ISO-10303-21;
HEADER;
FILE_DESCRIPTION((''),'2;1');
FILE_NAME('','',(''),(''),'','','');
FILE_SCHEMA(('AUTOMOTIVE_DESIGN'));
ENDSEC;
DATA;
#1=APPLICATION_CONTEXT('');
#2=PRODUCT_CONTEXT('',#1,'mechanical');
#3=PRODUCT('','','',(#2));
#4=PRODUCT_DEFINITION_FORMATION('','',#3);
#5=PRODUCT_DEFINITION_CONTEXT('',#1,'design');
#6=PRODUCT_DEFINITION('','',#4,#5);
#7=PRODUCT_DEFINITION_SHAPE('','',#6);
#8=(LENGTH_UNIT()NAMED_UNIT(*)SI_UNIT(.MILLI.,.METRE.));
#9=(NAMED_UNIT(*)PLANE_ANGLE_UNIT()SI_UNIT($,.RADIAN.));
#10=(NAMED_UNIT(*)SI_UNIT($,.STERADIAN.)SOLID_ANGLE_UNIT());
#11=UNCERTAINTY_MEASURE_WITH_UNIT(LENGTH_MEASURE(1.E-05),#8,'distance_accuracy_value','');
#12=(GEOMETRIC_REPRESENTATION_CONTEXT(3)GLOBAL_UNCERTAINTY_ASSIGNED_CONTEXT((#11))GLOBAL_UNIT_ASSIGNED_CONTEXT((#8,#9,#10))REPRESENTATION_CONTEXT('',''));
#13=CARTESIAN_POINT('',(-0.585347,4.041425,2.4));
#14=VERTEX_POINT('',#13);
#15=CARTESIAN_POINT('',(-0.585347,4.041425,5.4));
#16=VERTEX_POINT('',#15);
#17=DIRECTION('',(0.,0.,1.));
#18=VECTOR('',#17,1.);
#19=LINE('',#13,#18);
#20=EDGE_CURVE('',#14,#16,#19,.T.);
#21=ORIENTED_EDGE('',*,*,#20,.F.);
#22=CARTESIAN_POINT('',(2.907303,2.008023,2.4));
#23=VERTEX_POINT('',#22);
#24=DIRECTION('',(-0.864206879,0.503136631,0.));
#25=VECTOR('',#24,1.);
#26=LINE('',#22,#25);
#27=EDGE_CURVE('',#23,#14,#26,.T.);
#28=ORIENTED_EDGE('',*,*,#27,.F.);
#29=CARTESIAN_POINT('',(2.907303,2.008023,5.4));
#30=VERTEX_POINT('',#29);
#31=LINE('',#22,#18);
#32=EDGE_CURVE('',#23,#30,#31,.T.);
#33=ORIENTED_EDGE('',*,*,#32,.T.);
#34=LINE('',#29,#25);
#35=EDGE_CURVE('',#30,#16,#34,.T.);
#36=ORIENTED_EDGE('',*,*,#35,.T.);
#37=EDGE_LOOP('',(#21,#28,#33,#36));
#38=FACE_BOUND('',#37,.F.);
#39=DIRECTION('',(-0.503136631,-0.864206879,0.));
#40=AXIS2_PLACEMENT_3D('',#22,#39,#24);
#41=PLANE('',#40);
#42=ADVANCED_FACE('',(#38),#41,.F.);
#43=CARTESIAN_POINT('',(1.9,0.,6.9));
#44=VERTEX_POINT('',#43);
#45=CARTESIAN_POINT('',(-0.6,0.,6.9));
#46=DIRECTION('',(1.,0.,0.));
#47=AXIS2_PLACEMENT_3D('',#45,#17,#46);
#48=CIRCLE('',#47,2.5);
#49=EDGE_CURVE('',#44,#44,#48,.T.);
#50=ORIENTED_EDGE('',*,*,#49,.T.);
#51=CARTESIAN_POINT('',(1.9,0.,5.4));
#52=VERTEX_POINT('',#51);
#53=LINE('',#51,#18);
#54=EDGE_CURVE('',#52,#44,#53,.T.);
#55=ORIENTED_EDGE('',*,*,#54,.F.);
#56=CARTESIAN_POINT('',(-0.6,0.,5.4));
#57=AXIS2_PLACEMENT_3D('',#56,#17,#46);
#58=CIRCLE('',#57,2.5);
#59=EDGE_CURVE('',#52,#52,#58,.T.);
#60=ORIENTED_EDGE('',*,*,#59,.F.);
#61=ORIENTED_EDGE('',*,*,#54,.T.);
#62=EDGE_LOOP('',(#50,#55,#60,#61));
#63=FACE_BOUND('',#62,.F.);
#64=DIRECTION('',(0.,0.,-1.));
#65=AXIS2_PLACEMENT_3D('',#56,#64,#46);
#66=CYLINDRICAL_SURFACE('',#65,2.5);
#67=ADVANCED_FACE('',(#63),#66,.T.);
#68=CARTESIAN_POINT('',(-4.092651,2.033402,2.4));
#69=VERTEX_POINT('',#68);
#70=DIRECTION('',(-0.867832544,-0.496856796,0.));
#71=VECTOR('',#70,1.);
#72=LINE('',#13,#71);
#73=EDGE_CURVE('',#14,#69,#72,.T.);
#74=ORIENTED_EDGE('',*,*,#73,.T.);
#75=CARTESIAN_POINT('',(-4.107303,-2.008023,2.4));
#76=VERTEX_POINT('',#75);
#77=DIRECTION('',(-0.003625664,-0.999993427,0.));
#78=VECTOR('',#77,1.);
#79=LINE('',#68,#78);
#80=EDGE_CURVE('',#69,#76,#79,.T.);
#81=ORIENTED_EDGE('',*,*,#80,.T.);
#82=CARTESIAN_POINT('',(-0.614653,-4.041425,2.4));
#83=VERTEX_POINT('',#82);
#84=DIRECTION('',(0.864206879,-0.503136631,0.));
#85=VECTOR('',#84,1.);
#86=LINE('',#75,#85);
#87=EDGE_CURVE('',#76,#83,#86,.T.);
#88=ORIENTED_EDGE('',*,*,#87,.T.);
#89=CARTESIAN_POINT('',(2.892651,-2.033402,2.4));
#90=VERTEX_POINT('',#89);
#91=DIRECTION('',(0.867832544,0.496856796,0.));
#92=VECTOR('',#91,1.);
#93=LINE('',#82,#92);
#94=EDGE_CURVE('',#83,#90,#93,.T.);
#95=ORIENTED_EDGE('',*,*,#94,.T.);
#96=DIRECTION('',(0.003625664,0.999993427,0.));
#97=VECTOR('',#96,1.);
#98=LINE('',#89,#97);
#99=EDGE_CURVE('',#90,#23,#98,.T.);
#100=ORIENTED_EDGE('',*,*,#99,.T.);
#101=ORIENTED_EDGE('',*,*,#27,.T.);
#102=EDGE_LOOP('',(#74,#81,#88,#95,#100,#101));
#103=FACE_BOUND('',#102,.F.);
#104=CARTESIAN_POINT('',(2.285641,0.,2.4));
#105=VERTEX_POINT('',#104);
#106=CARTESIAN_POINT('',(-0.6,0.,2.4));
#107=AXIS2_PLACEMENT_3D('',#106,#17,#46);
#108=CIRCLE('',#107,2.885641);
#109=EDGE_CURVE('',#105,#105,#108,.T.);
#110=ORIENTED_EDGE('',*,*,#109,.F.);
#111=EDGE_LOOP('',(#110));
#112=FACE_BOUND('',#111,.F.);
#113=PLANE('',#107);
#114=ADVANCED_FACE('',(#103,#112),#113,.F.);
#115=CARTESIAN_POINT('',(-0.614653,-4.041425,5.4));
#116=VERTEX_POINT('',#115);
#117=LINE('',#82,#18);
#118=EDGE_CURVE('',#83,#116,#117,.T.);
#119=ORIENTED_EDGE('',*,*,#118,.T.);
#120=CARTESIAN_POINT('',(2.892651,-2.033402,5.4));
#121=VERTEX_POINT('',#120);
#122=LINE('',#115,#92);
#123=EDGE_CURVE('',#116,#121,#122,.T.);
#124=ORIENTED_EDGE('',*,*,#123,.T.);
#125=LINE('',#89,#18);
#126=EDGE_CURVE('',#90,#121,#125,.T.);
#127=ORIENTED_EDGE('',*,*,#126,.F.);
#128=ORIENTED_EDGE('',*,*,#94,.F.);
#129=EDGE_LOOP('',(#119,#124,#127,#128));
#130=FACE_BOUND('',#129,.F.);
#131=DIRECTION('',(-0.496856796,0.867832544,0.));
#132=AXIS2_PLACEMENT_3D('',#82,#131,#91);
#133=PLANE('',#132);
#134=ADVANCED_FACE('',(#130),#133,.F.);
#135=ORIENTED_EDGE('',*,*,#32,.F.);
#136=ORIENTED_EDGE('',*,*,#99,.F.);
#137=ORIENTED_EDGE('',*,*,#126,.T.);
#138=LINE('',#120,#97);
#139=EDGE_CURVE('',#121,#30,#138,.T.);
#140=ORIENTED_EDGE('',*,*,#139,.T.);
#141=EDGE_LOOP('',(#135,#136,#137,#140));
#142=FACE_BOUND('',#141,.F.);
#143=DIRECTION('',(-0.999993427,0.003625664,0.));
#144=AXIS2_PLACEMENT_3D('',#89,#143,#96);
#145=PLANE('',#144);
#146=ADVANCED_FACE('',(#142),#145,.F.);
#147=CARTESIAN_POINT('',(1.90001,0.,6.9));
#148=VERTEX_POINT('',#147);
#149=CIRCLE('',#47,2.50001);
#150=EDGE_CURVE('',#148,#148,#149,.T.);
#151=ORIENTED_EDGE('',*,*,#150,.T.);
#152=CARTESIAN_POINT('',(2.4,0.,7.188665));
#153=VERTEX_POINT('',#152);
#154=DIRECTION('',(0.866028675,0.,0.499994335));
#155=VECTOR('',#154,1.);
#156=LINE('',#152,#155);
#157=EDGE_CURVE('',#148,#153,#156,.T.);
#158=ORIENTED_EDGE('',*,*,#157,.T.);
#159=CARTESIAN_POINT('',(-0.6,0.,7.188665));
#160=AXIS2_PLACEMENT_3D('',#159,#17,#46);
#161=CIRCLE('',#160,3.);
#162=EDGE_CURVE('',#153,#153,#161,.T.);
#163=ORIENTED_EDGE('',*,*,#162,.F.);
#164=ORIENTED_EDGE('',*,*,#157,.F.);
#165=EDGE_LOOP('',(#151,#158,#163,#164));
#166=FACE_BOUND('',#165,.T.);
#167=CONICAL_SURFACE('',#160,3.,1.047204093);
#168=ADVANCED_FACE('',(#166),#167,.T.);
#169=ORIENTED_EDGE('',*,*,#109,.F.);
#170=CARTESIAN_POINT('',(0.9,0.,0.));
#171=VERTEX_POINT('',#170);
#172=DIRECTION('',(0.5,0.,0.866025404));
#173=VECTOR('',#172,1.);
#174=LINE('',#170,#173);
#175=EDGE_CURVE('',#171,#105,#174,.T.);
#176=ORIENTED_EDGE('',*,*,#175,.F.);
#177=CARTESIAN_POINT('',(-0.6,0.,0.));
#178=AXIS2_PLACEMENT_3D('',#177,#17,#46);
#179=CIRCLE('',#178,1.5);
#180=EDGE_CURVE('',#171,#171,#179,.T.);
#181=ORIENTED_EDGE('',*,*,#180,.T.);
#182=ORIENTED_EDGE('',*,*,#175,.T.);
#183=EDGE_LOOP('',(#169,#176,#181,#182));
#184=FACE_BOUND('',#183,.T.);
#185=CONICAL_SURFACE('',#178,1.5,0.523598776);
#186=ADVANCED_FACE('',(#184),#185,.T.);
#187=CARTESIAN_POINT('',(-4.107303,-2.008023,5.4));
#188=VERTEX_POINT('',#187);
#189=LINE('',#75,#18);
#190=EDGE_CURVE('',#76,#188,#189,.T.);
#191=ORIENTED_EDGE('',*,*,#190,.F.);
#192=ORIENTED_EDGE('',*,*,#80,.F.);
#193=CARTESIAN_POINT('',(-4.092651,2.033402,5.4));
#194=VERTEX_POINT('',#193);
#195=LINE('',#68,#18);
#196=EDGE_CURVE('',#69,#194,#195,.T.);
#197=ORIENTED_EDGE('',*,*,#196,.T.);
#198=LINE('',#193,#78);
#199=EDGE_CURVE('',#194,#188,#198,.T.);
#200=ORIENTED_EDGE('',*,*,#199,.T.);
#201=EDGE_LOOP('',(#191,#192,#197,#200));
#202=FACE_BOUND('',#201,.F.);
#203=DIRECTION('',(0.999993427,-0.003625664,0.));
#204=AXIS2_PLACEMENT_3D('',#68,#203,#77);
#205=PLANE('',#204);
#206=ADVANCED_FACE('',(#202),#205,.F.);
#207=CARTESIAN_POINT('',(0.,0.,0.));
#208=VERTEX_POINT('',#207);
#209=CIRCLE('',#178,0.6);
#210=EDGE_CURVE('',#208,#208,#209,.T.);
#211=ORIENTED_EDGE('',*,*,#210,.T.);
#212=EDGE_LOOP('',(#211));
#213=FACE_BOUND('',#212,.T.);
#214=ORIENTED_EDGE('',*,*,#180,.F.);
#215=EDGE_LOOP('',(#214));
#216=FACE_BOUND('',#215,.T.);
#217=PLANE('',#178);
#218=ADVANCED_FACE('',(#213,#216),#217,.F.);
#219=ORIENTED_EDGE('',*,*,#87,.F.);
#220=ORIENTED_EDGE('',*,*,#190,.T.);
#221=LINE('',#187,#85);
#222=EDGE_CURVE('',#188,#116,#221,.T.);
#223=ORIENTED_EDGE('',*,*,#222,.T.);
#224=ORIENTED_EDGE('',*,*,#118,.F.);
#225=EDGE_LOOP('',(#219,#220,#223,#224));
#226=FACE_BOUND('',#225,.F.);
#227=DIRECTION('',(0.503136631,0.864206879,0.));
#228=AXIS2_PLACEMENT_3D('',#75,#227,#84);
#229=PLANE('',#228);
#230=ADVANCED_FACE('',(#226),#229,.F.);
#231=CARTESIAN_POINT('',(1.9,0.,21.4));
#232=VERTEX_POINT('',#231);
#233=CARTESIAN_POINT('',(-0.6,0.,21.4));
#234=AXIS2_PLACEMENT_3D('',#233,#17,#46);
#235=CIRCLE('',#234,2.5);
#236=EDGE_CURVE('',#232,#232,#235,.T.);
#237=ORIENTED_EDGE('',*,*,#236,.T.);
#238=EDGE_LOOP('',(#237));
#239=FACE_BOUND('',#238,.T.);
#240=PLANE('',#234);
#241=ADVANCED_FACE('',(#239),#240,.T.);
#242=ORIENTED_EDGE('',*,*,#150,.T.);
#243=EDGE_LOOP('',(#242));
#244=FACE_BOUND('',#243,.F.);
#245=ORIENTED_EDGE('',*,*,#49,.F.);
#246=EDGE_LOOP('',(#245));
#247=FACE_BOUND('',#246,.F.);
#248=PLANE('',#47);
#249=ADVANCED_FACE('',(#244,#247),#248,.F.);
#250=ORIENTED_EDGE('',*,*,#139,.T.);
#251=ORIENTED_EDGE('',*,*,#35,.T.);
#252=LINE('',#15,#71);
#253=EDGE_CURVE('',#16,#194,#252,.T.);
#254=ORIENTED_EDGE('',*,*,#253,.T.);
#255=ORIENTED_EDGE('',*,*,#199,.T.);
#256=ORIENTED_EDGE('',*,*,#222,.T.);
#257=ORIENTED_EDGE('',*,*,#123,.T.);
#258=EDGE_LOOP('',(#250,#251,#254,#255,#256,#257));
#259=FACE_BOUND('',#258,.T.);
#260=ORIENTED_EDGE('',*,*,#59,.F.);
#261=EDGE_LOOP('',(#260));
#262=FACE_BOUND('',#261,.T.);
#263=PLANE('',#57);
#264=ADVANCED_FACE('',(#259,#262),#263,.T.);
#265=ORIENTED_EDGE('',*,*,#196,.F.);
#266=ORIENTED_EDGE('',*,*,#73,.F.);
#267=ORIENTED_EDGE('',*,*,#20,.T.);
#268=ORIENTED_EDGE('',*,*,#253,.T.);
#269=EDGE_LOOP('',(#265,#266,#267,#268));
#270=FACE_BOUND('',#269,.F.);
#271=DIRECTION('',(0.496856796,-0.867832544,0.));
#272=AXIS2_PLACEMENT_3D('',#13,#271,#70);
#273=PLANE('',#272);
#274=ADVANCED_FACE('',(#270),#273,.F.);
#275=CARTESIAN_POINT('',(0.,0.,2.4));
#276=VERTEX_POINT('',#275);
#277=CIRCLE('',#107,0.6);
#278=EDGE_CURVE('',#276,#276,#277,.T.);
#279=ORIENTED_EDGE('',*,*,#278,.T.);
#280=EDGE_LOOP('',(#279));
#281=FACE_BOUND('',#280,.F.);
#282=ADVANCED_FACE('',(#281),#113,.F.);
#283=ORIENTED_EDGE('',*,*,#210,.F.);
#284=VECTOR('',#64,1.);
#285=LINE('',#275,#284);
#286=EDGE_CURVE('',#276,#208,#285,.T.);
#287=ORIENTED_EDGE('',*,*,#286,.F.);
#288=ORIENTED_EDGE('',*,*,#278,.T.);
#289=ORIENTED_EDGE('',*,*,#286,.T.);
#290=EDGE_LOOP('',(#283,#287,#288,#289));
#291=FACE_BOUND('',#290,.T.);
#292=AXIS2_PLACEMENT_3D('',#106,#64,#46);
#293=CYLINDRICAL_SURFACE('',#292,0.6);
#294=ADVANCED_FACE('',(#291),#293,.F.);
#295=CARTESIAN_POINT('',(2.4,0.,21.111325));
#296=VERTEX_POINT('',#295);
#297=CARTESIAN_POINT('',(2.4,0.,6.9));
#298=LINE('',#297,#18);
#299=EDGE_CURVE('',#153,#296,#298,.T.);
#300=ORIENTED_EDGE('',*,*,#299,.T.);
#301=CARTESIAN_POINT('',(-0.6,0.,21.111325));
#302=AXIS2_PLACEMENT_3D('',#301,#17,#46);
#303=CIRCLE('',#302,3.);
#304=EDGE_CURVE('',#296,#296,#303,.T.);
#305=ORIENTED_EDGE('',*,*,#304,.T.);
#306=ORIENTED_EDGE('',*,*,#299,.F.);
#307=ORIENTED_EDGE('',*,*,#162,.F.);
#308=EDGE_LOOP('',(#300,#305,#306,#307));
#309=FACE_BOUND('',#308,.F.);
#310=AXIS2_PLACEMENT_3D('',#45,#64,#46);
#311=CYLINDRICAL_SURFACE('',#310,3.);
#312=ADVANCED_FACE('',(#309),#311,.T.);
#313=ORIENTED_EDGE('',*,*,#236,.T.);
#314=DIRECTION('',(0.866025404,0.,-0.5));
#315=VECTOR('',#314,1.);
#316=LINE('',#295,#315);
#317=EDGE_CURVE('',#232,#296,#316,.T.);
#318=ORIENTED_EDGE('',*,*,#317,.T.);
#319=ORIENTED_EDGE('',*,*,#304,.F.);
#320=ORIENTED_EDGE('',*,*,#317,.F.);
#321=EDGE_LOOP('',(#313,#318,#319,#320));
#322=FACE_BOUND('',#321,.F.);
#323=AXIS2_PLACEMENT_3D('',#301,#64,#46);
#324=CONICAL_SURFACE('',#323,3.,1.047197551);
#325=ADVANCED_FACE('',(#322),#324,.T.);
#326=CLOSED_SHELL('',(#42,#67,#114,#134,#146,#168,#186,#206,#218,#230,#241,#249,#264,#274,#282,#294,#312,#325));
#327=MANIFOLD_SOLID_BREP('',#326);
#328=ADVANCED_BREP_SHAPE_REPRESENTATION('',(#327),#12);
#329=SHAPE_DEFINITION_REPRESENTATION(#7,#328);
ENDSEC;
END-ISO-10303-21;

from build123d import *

# Parameters (mm, degrees)
F3_DEPTH   = 3
F4_R       = 2.5
F5_DEPTH   = 1.5
F6_R       = 3
F7_DEPTH   = 14.5
F8_SIZE2   = 0.2886751346
F8_SIZE    = 0.5
F8_2_SIZE2 = 0.288665
F8_2_SIZE  = 0.49999


# Not quite as in the source:
# - a fillet or chamfer is up to 0.001 mm smaller than in the source, because OpenCascade refuses the exact size


with BuildPart() as f1:
    # F0 (on Front) → F1 (revolve)
    with BuildSketch(Plane.XZ):
        Polygon((0, 2.4), (0, 0), (0.9, 0), (2.2856406461, 2.4), align=None)
    revolve(axis=Axis((-0.6, 0, 1.2), (0, 0, 1)))

    # F2 (on face) → F3 (join)
    with BuildSketch(Plane.XY.offset(2.4)):
        Polygon((2.9073034694, 2.0080228353), (-0.5853470521, 4.0414253209), (-4.0926505214, 2.0334024856), (-4.1073034694, -2.0080228353), (-0.6146529479, -4.0414253209), (2.8926505214, -2.0334024856), align=None)
    extrude(amount=F3_DEPTH)

    # F4 (on face) → F5 (join)
    with BuildSketch(Plane.XY.offset(5.4)):
        with Locations((-0.6, 0)):
            Circle(F4_R)
    extrude(amount=F5_DEPTH)

    # F6 (on face) → F7 (join)
    with BuildSketch(Plane.XY.offset(6.9)):
        with Locations((-0.6, 0)):
            Circle(F6_R)
    extrude(amount=F7_DEPTH)

    # F8
    f8_edges = [f1.edges().sort_by_distance(p)[0] for p in [
        (-3.6, 0, 21.4),
    ]]
    f8_side = f1.faces().sort_by_distance((-0.6, 0, 21.4))[0]
    chamfer(f8_edges, length=F8_SIZE, length2=F8_SIZE2, reference=f8_side)

    # F8#2 (size 0.5 and 0.2886751346 in the source; OpenCascade refuses exactly that, so slightly less here)
    f8_2_edges = [f1.edges().sort_by_distance(p)[0] for p in [
        (-3.6, 0, 6.9),
    ]]
    f8_2_side = f1.faces().sort_by_distance((-3.515147, 0, 6.9))[0]
    chamfer(f8_2_edges, length=F8_2_SIZE, length2=F8_2_SIZE2, reference=f8_2_side)


solid = f1.part
